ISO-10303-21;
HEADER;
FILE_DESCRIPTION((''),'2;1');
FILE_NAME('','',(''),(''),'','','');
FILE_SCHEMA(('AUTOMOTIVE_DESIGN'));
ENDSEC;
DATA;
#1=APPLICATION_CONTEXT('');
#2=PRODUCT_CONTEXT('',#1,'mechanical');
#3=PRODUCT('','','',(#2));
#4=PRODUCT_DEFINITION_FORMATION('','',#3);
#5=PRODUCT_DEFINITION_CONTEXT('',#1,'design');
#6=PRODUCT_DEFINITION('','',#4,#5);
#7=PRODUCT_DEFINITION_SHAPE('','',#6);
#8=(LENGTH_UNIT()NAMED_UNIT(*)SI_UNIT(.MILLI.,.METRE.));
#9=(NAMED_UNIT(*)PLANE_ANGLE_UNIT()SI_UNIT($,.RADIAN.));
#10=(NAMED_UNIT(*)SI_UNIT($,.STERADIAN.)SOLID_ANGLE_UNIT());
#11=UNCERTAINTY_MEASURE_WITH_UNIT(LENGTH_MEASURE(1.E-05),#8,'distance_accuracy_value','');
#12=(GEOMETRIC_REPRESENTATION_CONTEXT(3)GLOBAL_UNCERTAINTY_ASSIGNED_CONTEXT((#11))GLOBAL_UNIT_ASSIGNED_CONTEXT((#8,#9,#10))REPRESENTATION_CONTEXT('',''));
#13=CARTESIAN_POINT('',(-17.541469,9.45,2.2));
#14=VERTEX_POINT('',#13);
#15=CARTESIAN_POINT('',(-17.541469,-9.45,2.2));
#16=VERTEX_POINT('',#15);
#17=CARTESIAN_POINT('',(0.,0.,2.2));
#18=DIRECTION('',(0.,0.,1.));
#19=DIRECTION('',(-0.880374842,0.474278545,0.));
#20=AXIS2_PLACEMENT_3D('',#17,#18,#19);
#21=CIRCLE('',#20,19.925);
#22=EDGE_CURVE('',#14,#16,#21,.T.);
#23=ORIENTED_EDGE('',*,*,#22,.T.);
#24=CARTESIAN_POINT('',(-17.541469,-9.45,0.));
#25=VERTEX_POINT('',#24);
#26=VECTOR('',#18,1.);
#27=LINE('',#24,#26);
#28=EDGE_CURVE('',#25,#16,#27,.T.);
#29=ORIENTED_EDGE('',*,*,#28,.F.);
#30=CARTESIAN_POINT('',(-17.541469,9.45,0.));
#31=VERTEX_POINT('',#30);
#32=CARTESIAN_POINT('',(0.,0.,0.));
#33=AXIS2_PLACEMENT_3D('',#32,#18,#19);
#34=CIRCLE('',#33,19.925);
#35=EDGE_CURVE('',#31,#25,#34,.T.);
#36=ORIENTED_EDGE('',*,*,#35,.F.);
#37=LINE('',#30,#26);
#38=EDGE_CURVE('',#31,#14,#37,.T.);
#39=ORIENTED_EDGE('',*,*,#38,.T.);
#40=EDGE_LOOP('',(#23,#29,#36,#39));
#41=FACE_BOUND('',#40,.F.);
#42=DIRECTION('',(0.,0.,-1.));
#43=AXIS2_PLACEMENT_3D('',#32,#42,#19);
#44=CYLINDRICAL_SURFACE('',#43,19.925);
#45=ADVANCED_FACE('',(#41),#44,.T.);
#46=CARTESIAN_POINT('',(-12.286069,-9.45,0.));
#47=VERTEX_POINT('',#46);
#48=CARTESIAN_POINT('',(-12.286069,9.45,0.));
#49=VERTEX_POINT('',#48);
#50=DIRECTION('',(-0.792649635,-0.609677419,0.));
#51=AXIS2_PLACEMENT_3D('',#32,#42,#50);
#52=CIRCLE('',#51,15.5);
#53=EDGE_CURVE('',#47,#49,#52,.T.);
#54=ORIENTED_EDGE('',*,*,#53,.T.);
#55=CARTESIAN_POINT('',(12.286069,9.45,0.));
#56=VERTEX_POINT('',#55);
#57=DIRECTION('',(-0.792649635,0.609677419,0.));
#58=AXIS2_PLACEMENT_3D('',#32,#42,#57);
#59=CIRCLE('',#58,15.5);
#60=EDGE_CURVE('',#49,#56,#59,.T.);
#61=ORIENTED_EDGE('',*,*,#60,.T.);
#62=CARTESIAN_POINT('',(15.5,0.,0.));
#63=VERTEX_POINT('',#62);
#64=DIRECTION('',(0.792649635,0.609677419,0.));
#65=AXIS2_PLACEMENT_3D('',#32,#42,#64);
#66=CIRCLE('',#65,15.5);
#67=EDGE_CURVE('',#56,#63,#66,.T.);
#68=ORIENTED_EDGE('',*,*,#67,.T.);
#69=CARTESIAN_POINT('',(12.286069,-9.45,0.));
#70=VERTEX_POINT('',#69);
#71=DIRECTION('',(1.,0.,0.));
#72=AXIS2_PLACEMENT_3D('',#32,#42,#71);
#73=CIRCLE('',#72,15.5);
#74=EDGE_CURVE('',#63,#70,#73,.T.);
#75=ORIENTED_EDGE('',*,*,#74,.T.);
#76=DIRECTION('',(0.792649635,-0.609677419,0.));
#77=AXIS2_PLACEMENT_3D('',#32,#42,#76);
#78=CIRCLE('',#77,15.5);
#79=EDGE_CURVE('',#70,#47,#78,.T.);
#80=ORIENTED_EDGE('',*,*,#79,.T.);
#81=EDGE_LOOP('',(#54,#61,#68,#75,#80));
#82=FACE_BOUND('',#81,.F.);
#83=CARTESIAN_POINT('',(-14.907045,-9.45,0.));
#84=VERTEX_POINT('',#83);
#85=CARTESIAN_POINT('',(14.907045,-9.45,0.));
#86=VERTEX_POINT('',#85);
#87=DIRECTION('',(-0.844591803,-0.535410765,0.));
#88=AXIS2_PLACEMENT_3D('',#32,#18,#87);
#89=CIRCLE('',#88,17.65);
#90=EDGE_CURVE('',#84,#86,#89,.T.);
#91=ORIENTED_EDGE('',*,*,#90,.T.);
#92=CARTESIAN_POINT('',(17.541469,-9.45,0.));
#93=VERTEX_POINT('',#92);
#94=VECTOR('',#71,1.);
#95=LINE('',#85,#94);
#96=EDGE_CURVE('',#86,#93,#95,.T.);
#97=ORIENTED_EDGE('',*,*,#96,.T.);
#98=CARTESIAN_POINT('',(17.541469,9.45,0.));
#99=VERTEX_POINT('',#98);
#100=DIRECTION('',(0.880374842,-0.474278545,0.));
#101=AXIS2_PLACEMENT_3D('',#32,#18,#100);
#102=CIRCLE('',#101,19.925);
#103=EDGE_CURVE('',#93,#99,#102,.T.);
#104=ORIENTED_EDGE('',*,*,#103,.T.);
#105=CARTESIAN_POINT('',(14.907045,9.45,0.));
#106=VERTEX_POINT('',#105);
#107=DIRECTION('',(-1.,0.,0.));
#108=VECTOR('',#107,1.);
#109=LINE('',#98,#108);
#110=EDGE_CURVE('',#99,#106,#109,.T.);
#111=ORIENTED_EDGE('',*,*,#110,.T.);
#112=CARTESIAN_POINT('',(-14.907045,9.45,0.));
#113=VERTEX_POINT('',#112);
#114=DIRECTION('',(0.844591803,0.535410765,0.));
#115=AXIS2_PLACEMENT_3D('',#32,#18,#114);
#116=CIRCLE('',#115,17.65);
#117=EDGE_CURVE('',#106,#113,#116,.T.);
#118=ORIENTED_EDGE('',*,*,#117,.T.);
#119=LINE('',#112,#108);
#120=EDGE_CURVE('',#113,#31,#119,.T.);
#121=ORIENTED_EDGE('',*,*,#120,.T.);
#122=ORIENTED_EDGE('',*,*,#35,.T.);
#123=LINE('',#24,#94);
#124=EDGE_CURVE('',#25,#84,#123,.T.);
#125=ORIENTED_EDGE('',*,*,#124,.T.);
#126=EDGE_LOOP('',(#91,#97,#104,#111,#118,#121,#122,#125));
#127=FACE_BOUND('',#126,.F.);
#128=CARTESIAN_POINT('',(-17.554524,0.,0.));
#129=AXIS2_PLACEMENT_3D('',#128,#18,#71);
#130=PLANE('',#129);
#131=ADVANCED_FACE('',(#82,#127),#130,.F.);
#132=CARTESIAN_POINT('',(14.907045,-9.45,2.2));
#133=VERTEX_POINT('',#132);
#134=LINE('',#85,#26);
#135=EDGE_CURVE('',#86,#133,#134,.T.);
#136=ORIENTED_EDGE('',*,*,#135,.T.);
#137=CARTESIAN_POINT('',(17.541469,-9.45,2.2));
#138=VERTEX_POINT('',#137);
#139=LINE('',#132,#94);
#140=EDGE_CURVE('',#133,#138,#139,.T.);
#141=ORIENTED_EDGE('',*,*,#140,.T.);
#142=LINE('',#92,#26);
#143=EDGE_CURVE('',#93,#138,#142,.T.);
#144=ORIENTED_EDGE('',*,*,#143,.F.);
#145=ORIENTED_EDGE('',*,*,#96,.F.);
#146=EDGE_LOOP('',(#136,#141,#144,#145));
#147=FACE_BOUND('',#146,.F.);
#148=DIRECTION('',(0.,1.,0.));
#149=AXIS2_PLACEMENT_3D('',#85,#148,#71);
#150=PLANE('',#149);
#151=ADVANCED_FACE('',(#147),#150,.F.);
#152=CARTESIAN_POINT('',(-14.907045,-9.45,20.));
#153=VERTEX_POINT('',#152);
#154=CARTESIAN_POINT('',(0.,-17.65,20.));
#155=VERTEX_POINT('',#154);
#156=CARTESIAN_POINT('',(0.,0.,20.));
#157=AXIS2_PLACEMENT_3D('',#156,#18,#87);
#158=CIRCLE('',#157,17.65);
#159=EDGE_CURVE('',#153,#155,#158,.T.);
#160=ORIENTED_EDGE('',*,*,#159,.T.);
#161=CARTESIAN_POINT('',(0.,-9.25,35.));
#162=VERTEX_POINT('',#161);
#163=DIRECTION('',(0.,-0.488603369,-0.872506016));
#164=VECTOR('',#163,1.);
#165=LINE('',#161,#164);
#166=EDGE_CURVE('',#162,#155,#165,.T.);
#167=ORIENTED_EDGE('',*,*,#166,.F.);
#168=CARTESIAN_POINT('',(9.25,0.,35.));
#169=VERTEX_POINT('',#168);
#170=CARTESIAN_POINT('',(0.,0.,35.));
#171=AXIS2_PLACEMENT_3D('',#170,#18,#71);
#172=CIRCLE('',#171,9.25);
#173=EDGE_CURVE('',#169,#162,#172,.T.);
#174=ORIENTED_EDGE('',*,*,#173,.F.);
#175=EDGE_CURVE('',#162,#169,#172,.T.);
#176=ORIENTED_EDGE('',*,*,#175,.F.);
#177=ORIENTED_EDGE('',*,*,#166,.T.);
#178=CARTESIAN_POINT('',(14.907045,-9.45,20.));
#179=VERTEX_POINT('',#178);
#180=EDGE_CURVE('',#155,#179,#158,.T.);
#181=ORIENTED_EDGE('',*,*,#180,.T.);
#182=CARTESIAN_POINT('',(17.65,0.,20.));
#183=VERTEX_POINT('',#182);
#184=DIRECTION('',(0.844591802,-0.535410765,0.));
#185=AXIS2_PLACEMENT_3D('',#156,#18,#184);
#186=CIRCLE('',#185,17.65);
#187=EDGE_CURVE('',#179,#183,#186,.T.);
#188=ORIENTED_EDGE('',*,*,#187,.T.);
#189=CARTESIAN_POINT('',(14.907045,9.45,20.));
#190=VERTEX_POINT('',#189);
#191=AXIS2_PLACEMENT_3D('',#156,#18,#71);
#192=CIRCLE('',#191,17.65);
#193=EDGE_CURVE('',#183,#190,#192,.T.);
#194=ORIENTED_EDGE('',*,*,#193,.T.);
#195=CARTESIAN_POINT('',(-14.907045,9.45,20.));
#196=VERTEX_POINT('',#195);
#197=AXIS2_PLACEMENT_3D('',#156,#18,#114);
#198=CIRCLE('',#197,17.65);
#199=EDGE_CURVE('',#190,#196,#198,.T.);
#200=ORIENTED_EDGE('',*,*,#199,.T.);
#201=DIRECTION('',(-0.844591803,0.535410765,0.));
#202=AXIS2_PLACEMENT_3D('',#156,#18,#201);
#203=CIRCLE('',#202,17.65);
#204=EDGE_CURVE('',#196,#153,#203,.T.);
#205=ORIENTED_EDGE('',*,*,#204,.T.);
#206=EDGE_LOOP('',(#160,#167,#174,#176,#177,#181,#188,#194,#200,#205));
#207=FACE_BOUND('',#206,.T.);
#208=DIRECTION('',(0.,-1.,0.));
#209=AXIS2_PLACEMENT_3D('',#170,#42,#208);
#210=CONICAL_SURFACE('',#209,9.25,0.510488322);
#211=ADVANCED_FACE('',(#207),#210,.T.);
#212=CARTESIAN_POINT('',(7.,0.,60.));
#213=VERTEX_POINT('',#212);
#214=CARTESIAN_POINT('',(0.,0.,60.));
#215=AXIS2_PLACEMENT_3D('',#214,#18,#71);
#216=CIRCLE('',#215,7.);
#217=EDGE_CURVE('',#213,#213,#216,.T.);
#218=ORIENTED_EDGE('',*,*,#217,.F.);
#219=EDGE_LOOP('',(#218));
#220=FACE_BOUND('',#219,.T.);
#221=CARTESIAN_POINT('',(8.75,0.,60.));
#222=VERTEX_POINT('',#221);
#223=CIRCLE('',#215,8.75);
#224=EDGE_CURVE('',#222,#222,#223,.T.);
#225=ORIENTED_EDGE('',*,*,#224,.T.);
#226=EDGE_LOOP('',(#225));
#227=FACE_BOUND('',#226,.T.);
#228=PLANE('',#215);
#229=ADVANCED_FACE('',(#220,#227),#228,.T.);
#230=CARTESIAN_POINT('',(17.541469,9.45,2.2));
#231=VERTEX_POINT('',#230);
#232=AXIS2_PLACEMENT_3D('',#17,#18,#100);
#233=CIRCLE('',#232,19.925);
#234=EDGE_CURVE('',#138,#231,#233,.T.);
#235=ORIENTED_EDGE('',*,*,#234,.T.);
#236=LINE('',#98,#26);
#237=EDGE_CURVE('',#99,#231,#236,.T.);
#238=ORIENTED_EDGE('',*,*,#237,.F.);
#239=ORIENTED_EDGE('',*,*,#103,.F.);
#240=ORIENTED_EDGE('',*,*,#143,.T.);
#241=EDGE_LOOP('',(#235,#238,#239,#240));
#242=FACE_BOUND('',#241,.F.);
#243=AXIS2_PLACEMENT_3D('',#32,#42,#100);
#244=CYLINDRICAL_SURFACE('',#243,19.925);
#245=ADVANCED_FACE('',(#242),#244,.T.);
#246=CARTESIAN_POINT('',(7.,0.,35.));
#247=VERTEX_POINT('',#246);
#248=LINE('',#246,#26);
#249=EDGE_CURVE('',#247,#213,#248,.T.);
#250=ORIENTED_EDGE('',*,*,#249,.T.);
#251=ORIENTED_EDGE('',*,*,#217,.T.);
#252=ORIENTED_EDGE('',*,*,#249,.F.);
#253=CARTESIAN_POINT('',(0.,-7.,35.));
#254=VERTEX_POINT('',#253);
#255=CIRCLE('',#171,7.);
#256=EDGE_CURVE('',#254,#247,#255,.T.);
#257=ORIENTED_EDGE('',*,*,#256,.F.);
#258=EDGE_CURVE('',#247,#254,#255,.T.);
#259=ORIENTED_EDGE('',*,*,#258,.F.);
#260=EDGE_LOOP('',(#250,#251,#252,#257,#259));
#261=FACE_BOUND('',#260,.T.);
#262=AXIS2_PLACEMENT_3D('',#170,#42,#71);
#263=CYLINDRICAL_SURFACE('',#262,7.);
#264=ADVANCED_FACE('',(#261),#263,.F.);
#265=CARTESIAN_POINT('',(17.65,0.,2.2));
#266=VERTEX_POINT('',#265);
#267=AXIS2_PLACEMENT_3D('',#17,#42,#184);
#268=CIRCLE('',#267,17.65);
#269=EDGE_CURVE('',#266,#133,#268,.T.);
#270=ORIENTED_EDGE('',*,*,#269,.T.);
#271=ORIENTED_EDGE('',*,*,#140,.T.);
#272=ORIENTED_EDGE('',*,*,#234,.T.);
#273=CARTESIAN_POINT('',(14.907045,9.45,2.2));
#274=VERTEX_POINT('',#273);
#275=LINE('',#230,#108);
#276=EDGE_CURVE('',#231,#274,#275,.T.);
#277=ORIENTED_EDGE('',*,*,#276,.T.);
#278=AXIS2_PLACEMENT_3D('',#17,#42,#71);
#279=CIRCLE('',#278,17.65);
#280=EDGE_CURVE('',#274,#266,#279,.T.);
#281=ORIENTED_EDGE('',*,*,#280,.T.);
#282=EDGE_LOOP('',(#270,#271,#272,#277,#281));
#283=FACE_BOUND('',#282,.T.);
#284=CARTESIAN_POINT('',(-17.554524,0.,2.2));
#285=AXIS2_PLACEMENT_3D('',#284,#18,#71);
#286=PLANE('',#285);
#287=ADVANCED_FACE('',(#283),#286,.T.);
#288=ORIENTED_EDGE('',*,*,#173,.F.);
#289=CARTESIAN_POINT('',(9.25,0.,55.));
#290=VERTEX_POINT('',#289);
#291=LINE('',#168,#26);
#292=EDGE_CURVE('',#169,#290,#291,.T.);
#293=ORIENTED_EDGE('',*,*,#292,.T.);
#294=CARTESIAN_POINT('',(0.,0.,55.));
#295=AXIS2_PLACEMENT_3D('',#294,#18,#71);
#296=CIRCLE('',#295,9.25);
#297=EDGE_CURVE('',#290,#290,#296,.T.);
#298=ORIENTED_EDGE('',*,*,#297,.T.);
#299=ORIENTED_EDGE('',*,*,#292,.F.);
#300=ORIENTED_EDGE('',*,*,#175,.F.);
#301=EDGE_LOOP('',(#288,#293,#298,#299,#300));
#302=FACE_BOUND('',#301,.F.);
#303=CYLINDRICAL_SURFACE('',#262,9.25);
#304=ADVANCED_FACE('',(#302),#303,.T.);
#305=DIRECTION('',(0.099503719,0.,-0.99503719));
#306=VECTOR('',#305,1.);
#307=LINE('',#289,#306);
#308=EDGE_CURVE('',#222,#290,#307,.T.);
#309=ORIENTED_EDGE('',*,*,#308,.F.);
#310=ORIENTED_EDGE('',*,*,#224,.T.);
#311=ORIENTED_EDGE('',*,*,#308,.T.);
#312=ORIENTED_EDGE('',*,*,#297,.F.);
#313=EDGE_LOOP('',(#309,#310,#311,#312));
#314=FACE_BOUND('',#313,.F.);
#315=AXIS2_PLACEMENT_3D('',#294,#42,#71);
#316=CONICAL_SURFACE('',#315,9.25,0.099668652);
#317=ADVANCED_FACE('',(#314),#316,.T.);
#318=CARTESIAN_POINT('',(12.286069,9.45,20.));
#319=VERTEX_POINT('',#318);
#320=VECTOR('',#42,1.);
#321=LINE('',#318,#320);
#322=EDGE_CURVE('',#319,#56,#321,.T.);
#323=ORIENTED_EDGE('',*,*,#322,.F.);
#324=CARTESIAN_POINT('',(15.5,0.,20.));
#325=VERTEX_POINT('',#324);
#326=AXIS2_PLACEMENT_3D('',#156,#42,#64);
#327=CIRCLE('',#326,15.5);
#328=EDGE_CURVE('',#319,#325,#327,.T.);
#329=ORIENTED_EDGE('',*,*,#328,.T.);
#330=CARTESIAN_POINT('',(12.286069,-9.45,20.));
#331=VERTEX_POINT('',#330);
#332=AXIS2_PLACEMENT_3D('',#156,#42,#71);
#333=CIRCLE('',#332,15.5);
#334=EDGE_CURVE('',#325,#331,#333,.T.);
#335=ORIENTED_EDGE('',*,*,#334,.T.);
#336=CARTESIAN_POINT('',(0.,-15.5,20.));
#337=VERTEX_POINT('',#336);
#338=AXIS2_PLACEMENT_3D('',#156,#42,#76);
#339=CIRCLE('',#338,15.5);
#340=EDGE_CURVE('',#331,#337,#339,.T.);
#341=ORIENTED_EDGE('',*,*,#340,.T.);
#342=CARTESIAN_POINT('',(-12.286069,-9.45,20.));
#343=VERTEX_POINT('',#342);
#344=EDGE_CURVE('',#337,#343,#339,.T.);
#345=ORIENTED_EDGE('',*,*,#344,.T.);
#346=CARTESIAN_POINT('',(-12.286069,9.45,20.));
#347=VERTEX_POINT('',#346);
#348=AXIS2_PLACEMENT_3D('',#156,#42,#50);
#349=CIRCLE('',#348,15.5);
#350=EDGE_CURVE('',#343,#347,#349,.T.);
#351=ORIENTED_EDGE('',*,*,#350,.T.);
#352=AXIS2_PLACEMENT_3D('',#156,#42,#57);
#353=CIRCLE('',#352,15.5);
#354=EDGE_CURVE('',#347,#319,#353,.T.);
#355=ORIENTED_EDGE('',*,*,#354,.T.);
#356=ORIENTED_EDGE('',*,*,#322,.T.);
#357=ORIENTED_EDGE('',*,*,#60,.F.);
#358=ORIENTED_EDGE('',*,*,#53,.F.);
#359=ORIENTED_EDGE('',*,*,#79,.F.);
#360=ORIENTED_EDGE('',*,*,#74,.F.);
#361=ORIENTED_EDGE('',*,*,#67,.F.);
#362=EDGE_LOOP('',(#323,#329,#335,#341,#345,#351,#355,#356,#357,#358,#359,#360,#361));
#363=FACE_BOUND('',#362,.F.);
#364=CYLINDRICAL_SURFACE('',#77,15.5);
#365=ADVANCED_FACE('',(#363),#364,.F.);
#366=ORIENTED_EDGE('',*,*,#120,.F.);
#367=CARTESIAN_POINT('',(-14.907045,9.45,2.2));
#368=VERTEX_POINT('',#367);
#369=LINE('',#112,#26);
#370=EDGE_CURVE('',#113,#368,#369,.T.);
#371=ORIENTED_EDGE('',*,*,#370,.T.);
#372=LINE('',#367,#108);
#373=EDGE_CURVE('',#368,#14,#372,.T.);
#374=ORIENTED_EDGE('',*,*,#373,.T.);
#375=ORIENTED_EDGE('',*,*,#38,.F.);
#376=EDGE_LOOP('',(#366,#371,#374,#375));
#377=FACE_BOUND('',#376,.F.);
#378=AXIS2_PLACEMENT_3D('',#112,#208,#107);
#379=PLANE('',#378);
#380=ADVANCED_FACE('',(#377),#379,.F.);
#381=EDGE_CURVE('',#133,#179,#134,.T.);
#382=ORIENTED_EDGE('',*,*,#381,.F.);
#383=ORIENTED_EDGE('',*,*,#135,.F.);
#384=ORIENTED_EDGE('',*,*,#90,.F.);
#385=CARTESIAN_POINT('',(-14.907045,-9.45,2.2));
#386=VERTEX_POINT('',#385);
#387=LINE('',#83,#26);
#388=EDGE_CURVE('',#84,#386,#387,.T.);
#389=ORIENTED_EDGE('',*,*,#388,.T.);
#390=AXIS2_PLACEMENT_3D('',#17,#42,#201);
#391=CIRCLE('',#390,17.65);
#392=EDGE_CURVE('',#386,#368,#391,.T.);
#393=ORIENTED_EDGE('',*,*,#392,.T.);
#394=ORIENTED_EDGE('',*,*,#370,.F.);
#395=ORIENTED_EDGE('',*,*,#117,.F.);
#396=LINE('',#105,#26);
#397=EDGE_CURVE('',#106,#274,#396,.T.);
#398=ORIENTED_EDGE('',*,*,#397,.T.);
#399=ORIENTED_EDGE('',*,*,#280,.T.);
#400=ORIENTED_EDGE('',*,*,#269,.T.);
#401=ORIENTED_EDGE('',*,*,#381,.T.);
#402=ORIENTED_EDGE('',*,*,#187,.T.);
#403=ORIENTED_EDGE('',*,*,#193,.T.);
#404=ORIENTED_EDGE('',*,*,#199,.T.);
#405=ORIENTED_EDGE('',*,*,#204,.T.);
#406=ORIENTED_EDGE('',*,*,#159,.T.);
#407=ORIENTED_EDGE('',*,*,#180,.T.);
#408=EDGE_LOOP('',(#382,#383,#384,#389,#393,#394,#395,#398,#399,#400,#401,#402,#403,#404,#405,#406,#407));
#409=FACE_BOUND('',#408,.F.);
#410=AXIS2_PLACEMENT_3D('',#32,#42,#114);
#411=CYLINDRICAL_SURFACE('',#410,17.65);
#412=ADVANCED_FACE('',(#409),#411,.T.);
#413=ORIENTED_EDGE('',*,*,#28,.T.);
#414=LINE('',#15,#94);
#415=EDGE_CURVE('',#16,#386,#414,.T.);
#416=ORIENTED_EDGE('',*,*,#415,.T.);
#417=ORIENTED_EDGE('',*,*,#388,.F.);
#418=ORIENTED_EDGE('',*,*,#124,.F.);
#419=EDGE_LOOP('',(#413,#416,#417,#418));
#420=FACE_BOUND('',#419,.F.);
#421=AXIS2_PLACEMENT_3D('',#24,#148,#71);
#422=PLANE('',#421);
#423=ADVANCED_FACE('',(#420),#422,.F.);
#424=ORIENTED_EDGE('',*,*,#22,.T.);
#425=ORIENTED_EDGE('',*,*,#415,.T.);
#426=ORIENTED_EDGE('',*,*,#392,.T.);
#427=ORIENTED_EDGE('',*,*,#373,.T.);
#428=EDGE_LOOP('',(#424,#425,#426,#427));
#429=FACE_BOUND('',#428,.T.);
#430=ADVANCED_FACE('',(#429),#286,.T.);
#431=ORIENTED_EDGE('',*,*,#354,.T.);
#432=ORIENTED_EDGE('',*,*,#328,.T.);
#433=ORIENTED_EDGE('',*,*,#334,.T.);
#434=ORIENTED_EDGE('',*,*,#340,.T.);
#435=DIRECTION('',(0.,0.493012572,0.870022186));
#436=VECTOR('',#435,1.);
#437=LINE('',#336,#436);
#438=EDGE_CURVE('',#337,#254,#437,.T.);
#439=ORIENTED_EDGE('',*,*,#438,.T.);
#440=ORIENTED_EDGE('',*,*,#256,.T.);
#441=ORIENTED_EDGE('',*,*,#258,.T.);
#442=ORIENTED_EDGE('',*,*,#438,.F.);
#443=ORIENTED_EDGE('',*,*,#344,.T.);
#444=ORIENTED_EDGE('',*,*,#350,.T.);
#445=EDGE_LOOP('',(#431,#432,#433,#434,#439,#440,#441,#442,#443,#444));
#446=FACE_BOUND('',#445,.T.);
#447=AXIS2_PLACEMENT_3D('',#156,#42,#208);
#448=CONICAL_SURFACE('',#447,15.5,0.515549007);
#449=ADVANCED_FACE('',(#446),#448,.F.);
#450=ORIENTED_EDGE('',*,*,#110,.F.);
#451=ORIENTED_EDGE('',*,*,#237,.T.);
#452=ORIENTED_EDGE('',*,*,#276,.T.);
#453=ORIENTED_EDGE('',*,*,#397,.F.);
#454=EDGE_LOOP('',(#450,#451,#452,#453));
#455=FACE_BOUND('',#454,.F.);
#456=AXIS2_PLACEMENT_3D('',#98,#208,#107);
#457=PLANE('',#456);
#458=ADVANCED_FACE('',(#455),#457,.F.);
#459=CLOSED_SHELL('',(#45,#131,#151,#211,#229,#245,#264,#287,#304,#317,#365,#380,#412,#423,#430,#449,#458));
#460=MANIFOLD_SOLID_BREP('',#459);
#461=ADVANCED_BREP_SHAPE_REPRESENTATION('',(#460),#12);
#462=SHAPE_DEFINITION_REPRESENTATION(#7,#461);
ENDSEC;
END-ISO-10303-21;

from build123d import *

# Parameters (mm, degrees)
F1_DEPTH = 2.2
F2_DEPTH = 20
F4_R     = 9.25
F4_R_2   = 7
F5_DEPTH = 25
F8_SIZE2 = 5
F8_SIZE  = 0.5


with BuildPart() as f1:
    # F0 (on Top) → F1 (new body)
    with BuildSketch(Plane.XY):
        with BuildLine():
            ThreePointArc((-14.9070453142, -9.45), (-17.65, 0), (-14.9070453142, 9.45))
            Line((-14.9070453142, 9.45), (-17.5414687241, 9.45))
            ThreePointArc((-17.5414687241, 9.45), (-19.925, 0), (-17.5414687241, -9.45))
            Line((-17.5414687241, -9.45), (-14.9070453142, -9.45))
        make_face()
        with BuildLine():
            ThreePointArc((14.9070453142, 9.45), (16.9503960101, 4.9200177949), (17.65, 0))
            ThreePointArc((17.65, 0), (16.9503960101, -4.9200177949), (14.9070453142, -9.45))
            Line((14.9070453142, -9.45), (17.5414687241, -9.45))
            ThreePointArc((17.5414687241, -9.45), (19.925, 0), (17.5414687241, 9.45))
            Line((17.5414687241, 9.45), (14.9070453142, 9.45))
        make_face()
        with BuildLine():
            Line((12.286069347, 9.45), (14.9070453142, 9.45))
            ThreePointArc((14.9070453142, 9.45), (0, 17.65), (-14.9070453142, 9.45))
            Line((-14.9070453142, 9.45), (-12.286069347, 9.45))
            ThreePointArc((-12.286069347, 9.45), (0, 15.5), (12.286069347, 9.45))
        make_face()
        with BuildLine():
            Line((-12.286069347, 9.45), (-14.9070453142, 9.45))
            ThreePointArc((-14.9070453142, 9.45), (-17.65, 0), (-14.9070453142, -9.45))
            Line((-14.9070453142, -9.45), (-12.286069347, -9.45))
            ThreePointArc((-12.286069347, -9.45), (-15.5, 0), (-12.286069347, 9.45))
        make_face()
        with BuildLine():
            ThreePointArc((-14.9070453142, -9.45), (0, -17.65), (14.9070453142, -9.45))
            Line((14.9070453142, -9.45), (12.286069347, -9.45))
            ThreePointArc((12.286069347, -9.45), (0, -15.5), (-12.286069347, -9.45))
            Line((-12.286069347, -9.45), (-14.9070453142, -9.45))
        make_face()
        with BuildLine():
            ThreePointArc((14.9070453142, -9.45), (16.9503960101, -4.9200177949), (17.65, 0))
            ThreePointArc((17.65, 0), (16.9503960101, 4.9200177949), (14.9070453142, 9.45))
            Line((14.9070453142, 9.45), (12.286069347, 9.45))
            ThreePointArc((12.286069347, 9.45), (14.6745370434, 4.9907877695), (15.5, 0))
            ThreePointArc((15.5, 0), (14.6745370434, -4.9907877695), (12.286069347, -9.45))
            Line((12.286069347, -9.45), (14.9070453142, -9.45))
        make_face()
    extrude(amount=F1_DEPTH)

    # F0 (on Top) → F2 (join)
    with BuildSketch(Plane.XY):
        with BuildLine():
            Line((12.286069347, 9.45), (14.9070453142, 9.45))
            ThreePointArc((14.9070453142, 9.45), (0, 17.65), (-14.9070453142, 9.45))
            Line((-14.9070453142, 9.45), (-12.286069347, 9.45))
            ThreePointArc((-12.286069347, 9.45), (0, 15.5), (12.286069347, 9.45))
        make_face()
        with BuildLine():
            Line((-12.286069347, 9.45), (-14.9070453142, 9.45))
            ThreePointArc((-14.9070453142, 9.45), (-17.65, 0), (-14.9070453142, -9.45))
            Line((-14.9070453142, -9.45), (-12.286069347, -9.45))
            ThreePointArc((-12.286069347, -9.45), (-15.5, 0), (-12.286069347, 9.45))
        make_face()
        with BuildLine():
            ThreePointArc((-14.9070453142, -9.45), (0, -17.65), (14.9070453142, -9.45))
            Line((14.9070453142, -9.45), (12.286069347, -9.45))
            ThreePointArc((12.286069347, -9.45), (0, -15.5), (-12.286069347, -9.45))
            Line((-12.286069347, -9.45), (-14.9070453142, -9.45))
        make_face()
        with BuildLine():
            ThreePointArc((14.9070453142, -9.45), (16.9503960101, -4.9200177949), (17.65, 0))
            ThreePointArc((17.65, 0), (16.9503960101, 4.9200177949), (14.9070453142, 9.45))
            Line((14.9070453142, 9.45), (12.286069347, 9.45))
            ThreePointArc((12.286069347, 9.45), (14.6745370434, 4.9907877695), (15.5, 0))
            ThreePointArc((15.5, 0), (14.6745370434, -4.9907877695), (12.286069347, -9.45))
            Line((12.286069347, -9.45), (14.9070453142, -9.45))
        make_face()
    extrude(amount=F2_DEPTH)



with BuildPart() as f5:
    # F4 (on offset) → F5 (new body)
    with BuildSketch(Plane.XY.offset(35)):
        Circle(F4_R)
        Circle(F4_R_2, mode=Mode.SUBTRACT)
    extrude(amount=F5_DEPTH)


with BuildPart() as f1_1:
    add(f1.part)

    add(f5.part)  # F7 merges F5
    # F6 (on Right) → F7 (revolve)
    with BuildSketch(Plane.YZ):
        Polygon((-9.25, 35), (-17.65, 20), (-15.5, 20), (-7, 35), align=None)
    revolve(axis=Axis((0, 0, 18.8534432091), (0, 0, -1)))

    # F8
    f8_edges = [f1_1.edges().sort_by_distance(p)[0] for p in [
        (-9.25, 0, 60),
    ]]
    f8_side = f1_1.faces().sort_by_distance((-8.98837, 0, 60))[0]
    chamfer(f8_edges, length=F8_SIZE, length2=F8_SIZE2, reference=f8_side)


solid = f1_1.part
